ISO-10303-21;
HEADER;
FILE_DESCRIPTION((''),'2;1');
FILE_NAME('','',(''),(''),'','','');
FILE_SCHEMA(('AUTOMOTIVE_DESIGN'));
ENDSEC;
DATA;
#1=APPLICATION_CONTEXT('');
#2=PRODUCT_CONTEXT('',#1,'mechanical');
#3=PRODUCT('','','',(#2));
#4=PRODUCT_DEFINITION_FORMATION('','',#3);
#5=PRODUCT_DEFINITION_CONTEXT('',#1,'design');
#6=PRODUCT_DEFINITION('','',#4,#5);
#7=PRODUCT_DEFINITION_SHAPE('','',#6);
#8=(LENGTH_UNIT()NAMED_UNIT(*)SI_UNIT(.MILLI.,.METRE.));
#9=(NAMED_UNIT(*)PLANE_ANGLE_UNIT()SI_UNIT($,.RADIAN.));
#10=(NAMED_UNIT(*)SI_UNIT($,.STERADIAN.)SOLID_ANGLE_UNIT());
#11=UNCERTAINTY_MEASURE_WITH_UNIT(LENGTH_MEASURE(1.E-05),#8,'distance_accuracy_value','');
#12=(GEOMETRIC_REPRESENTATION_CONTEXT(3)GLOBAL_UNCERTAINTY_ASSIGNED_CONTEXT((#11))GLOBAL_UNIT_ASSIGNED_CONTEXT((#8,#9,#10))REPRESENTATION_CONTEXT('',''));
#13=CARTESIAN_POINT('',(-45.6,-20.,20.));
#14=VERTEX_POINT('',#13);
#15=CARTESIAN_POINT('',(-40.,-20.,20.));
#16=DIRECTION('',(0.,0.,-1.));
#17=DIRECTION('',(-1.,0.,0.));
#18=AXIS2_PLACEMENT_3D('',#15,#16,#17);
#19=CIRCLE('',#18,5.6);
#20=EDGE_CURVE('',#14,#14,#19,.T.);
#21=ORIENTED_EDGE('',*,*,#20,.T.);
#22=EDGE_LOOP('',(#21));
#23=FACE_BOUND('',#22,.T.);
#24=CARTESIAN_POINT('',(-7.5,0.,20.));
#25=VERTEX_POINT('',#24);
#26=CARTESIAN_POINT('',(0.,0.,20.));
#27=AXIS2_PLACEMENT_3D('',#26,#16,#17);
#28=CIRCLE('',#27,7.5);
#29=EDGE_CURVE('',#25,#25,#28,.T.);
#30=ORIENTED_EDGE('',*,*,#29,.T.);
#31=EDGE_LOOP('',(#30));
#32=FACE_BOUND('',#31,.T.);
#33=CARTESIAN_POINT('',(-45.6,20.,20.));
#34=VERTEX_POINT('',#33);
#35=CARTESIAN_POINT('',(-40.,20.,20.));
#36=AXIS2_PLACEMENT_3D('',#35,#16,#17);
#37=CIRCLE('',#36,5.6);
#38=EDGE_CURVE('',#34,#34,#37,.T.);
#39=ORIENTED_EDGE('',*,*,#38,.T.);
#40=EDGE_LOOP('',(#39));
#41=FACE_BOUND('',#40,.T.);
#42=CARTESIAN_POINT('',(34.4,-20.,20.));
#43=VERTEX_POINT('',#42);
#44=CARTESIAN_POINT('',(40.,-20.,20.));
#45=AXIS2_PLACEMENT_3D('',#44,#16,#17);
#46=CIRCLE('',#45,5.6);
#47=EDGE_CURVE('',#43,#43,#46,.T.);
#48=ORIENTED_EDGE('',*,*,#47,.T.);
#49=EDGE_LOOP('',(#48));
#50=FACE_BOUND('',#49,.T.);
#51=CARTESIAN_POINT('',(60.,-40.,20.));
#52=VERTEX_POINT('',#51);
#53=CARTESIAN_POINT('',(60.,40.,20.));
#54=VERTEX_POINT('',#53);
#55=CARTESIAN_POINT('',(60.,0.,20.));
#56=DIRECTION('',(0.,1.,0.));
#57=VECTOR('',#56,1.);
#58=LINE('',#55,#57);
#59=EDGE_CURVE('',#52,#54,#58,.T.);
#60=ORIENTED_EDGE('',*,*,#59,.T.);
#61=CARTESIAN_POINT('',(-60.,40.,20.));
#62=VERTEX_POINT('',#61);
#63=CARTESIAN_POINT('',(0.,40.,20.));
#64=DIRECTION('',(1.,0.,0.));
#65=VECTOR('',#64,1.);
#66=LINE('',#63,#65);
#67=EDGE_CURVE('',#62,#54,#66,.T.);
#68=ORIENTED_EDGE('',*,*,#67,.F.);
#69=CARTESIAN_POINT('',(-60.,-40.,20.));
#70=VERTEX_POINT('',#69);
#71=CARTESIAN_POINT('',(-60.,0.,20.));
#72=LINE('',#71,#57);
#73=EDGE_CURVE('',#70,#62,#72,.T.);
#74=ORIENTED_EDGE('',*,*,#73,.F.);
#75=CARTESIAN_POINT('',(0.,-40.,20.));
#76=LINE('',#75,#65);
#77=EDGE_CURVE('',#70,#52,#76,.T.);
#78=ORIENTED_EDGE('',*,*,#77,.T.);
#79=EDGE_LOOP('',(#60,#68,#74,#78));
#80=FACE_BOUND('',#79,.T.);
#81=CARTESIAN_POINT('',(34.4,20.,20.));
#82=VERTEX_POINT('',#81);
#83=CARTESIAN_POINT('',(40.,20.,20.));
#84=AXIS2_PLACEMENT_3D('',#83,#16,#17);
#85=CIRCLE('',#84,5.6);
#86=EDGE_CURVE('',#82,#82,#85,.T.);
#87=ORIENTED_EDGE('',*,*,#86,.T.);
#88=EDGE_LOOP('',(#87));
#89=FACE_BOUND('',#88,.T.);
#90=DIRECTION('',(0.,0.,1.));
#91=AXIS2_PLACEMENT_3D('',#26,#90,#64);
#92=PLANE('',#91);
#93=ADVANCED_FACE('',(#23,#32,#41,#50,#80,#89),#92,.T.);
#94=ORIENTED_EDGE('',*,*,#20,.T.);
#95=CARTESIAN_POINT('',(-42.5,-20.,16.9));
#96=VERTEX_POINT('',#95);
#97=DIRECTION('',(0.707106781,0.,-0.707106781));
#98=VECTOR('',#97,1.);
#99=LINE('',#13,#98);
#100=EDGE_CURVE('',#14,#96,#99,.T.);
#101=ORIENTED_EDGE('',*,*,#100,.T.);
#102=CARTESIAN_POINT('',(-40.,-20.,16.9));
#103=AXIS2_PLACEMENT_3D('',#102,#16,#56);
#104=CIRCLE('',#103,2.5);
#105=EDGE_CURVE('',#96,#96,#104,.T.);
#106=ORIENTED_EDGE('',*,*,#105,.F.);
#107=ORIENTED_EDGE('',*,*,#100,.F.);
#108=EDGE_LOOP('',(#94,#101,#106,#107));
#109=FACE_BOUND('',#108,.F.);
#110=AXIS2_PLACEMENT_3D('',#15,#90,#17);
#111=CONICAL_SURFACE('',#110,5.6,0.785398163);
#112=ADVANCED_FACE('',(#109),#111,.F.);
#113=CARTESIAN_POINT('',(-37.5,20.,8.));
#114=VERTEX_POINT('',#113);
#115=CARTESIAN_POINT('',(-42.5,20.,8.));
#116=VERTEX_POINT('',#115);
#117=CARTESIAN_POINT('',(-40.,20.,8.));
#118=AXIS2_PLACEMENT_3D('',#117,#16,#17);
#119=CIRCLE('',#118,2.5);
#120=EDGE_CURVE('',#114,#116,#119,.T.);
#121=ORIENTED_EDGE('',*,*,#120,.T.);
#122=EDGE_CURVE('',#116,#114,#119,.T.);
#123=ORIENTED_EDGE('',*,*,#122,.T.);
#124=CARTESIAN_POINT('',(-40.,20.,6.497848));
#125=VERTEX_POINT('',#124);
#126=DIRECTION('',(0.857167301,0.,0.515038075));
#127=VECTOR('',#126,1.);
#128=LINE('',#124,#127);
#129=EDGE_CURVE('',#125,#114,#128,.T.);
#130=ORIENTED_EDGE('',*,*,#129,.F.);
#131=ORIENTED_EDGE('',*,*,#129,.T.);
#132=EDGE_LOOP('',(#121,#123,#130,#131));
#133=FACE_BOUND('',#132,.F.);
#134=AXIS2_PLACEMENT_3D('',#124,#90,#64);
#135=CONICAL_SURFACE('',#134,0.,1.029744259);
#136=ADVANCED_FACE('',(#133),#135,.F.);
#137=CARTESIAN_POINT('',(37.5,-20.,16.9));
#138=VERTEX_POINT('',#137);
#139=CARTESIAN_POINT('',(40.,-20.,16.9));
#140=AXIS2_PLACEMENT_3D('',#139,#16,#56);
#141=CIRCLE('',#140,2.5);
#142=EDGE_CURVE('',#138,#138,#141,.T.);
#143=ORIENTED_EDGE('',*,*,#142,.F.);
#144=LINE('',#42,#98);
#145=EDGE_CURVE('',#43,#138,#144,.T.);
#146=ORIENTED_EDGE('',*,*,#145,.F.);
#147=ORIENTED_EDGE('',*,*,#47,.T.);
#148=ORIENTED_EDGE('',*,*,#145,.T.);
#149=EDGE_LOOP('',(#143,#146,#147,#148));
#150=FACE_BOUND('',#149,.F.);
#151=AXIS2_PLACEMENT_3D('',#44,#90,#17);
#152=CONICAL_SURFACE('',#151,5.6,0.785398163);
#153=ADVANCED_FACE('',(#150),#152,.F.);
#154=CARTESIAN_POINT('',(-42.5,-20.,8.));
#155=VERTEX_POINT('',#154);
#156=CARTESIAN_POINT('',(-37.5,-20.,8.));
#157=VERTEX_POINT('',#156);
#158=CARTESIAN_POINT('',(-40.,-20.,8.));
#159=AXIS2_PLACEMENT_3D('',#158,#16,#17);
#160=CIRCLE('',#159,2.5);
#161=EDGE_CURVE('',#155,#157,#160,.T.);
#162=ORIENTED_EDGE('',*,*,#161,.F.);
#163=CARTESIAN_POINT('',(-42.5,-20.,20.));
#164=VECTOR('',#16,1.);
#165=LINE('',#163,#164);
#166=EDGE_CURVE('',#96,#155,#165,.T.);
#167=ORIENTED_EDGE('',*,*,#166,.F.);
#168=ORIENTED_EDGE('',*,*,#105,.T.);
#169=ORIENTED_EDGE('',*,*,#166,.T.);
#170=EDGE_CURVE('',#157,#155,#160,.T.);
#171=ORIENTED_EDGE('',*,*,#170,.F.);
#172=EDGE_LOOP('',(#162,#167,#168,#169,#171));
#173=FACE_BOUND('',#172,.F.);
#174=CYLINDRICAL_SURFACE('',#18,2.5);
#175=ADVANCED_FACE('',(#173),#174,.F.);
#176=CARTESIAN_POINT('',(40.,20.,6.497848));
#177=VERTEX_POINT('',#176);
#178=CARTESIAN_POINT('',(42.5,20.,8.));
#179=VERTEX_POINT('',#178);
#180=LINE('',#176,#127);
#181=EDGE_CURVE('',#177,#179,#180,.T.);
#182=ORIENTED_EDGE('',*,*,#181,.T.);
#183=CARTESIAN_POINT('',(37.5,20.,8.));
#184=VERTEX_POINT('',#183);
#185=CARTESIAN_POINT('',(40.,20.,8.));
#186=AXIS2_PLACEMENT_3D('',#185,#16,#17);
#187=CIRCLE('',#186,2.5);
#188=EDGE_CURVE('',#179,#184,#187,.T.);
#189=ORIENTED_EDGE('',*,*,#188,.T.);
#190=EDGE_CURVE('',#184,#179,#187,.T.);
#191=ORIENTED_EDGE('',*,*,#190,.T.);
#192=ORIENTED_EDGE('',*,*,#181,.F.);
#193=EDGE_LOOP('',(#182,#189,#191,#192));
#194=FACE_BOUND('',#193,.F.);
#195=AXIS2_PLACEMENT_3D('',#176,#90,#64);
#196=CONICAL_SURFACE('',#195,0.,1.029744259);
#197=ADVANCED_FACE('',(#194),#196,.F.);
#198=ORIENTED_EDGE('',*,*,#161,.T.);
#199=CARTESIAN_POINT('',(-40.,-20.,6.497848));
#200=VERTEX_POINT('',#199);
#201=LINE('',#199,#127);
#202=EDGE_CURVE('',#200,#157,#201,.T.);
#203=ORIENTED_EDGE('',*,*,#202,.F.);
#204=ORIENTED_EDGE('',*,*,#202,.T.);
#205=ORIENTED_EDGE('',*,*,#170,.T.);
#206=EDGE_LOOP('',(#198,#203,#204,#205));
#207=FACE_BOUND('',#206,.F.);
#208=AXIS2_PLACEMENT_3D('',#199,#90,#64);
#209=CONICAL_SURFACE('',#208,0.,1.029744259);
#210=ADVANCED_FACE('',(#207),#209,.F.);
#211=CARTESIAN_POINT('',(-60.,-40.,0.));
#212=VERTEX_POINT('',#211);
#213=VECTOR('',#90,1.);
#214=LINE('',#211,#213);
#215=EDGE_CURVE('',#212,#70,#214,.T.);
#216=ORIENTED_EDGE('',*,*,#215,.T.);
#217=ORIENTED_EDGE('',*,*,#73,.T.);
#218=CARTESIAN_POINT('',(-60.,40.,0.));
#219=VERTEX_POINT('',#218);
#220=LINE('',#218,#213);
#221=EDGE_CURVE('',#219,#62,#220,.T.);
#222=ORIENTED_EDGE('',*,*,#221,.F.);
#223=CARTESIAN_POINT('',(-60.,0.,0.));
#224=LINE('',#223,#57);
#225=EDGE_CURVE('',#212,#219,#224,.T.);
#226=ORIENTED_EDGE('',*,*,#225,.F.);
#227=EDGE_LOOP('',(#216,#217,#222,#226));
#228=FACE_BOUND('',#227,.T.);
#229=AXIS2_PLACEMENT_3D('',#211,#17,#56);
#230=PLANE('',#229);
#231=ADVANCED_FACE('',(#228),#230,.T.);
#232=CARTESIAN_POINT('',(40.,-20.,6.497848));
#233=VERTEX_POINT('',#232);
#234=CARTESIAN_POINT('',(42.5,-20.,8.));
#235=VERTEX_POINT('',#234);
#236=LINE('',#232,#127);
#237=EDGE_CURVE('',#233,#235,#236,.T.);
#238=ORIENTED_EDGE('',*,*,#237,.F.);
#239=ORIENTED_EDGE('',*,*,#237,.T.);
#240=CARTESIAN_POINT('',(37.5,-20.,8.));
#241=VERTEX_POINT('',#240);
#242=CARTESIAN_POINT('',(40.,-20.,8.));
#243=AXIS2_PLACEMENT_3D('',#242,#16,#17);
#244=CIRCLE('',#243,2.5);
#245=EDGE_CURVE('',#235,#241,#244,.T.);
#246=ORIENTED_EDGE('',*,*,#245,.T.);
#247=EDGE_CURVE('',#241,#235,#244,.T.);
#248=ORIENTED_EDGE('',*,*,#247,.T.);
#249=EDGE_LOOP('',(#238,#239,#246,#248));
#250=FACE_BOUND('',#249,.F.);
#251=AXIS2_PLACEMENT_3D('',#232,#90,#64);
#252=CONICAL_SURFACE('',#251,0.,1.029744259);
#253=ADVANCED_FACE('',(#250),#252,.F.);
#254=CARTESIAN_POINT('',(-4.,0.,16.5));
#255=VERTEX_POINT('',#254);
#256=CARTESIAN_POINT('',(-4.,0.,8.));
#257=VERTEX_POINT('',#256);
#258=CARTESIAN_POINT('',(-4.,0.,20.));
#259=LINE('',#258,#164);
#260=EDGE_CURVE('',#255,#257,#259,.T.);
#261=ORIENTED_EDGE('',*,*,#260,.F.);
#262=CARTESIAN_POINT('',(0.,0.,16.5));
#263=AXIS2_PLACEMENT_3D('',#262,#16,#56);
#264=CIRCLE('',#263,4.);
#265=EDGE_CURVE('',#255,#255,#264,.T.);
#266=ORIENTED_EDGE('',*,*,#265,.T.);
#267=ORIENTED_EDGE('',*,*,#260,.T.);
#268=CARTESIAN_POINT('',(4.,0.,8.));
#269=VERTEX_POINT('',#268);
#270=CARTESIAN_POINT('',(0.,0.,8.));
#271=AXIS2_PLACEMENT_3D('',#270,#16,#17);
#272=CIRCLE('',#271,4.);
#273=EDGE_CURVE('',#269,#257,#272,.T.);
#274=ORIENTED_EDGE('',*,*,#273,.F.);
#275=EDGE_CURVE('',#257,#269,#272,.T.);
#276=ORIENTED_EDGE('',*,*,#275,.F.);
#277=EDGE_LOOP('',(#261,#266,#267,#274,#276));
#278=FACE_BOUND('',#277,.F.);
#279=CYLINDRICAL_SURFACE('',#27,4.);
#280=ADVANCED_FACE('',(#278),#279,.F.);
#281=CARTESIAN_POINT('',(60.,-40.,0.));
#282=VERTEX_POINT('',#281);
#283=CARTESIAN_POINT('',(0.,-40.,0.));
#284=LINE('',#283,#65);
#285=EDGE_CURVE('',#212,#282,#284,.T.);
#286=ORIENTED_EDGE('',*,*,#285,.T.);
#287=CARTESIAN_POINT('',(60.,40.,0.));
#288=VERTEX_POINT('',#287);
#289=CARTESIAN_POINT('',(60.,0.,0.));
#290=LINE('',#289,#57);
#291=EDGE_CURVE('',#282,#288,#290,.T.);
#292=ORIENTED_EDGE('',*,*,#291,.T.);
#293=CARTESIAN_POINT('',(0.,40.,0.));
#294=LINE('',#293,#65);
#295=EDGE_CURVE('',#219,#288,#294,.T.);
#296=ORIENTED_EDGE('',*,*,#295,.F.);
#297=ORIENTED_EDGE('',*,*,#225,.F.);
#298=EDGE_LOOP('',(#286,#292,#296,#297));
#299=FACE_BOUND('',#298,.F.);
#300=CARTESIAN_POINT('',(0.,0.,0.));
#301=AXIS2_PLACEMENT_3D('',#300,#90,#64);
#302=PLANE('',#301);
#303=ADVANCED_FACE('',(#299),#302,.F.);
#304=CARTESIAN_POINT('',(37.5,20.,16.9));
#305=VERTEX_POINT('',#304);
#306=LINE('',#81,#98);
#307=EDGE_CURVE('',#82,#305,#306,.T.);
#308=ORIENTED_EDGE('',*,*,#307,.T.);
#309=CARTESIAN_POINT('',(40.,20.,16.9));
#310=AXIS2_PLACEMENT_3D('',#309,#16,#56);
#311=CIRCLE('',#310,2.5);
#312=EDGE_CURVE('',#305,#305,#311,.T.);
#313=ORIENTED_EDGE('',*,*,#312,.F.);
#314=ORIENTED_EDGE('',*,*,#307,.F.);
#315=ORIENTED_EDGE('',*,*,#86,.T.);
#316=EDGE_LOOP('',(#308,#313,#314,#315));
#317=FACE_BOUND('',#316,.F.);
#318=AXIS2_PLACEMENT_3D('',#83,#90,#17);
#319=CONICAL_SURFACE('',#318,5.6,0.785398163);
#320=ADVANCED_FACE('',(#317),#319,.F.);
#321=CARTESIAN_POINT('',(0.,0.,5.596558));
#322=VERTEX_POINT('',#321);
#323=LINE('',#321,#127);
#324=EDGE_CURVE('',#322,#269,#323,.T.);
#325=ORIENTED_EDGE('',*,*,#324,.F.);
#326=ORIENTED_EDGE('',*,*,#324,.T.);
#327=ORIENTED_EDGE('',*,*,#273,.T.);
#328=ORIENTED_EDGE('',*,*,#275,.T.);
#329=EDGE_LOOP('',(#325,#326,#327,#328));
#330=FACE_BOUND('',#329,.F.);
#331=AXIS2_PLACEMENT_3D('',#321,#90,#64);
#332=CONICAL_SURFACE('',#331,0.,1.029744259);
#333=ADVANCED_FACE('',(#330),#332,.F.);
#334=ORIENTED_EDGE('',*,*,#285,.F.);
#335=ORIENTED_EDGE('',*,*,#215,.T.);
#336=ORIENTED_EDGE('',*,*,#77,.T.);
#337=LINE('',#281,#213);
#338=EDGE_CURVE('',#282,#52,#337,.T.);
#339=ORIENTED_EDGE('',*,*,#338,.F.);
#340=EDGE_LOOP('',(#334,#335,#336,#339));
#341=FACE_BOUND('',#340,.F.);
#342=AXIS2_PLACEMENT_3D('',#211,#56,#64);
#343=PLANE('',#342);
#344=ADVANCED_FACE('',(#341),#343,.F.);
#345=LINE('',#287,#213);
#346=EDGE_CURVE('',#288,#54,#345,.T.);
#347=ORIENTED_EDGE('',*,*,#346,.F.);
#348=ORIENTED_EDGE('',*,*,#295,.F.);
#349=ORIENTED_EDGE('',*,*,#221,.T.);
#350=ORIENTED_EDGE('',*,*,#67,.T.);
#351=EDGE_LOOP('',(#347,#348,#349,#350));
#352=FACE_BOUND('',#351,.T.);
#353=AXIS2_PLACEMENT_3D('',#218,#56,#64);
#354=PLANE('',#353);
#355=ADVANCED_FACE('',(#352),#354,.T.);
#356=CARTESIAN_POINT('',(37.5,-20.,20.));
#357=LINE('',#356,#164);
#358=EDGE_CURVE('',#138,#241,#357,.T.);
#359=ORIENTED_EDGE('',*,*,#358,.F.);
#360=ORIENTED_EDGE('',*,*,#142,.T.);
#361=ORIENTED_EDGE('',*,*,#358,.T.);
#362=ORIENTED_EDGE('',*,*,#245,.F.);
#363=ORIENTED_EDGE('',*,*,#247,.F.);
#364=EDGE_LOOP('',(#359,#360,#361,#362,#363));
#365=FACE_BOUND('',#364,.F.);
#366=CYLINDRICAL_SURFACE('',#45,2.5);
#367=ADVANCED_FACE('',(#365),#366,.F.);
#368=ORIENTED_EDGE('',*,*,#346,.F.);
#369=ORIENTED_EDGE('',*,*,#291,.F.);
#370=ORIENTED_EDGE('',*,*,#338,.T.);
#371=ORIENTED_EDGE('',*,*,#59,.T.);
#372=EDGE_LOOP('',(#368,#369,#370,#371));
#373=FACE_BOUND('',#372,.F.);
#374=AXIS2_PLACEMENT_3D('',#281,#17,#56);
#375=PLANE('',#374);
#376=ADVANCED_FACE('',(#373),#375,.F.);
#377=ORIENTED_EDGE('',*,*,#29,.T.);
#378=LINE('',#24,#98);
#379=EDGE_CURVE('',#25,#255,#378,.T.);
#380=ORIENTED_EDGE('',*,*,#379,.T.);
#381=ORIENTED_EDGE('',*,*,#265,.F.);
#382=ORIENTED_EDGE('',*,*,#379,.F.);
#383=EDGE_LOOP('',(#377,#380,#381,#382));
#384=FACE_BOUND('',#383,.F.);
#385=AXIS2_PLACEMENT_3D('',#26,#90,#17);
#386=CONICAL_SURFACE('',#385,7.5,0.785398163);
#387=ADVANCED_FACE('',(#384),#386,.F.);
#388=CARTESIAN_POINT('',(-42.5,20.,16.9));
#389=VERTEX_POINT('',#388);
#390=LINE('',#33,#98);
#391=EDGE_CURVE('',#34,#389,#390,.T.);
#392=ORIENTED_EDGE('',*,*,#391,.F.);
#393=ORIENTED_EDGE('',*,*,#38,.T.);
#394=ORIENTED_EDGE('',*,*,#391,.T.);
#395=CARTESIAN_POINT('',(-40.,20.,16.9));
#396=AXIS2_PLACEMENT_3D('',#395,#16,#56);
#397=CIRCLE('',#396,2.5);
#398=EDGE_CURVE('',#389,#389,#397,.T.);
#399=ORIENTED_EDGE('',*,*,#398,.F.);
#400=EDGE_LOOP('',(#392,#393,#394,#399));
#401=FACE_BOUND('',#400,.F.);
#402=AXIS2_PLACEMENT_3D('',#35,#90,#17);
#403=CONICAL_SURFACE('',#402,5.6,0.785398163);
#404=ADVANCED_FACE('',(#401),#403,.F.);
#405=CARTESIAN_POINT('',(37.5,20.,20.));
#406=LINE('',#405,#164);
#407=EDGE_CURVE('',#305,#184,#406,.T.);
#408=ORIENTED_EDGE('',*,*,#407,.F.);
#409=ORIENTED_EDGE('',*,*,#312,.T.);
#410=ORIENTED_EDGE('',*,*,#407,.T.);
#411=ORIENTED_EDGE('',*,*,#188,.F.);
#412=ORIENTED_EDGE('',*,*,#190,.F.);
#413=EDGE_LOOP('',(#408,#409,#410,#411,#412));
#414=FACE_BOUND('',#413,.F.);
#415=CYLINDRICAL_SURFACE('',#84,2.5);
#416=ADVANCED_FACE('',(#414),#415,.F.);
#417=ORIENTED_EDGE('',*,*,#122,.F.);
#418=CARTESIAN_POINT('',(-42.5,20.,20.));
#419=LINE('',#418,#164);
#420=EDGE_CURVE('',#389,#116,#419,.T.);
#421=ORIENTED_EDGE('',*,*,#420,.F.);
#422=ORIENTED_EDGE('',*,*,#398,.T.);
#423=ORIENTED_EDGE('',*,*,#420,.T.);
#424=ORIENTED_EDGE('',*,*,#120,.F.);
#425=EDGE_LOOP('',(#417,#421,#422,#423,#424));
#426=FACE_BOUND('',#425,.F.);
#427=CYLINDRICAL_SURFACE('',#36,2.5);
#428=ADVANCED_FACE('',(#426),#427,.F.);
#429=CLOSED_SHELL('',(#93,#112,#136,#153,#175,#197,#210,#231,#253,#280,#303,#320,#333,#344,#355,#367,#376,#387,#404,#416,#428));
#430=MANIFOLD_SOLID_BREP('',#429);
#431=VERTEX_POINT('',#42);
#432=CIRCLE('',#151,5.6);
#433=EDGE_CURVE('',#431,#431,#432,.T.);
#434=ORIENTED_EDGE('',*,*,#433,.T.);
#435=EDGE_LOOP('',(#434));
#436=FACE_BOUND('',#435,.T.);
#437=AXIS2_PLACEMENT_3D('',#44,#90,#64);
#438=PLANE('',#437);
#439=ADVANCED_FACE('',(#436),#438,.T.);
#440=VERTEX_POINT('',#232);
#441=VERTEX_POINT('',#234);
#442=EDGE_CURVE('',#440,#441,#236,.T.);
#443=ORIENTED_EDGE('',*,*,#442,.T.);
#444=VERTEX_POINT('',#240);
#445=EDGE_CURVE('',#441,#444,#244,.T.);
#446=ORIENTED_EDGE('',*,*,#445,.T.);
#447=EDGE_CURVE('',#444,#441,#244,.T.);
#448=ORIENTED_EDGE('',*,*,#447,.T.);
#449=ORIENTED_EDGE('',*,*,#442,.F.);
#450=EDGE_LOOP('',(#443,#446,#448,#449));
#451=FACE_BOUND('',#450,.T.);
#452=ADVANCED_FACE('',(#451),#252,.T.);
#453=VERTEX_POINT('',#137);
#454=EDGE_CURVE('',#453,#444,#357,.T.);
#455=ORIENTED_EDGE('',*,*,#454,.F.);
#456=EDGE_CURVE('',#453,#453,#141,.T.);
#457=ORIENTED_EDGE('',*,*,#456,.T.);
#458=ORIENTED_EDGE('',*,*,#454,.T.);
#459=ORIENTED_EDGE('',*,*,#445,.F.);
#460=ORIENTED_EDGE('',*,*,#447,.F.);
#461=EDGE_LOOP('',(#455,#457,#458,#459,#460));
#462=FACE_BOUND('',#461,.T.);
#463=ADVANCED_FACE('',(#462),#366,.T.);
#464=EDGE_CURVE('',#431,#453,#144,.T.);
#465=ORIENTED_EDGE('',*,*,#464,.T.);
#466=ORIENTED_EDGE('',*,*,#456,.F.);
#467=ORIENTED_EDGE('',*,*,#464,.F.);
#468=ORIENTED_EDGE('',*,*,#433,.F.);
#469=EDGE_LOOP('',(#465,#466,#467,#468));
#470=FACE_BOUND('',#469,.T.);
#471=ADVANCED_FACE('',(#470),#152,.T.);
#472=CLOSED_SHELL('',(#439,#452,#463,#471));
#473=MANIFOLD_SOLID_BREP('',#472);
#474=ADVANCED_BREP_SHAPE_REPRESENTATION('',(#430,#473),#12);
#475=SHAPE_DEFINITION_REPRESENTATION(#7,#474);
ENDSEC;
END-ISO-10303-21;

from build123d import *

# Parameters (mm, degrees)
F0_W           = 120
F0_H           = 80
F1_DEPTH       = 20
F3_D           = 5
F3_DEPTH       = 12
F3_CSINK_D     = 11.2
F3_CSINK_ANGLE = 90
F3_TIP         = 1.5021515476
F4_R           = 5.6
F5_DEPTH       = 20
F8_D           = 8
F8_DEPTH       = 12
F8_CSINK_D     = 15
F8_CSINK_ANGLE = 90
F8_TIP         = 2.4034424761


with BuildPart() as f1:
    # F0 (on Top) → F1 (new body)
    with BuildSketch(Plane.XY):
        Rectangle(F0_W, F0_H)
    extrude(amount=F1_DEPTH)

    # F3
    with Locations(Plane.XY.offset(20)):
        with Locations((-40, -20), (40, -20), (40, 20), (-40, 20)):
            CounterSinkHole(F3_D / 2, F3_CSINK_D / 2, depth=F3_DEPTH, counter_sink_angle=F3_CSINK_ANGLE)
            with Locations((0, 0, -(F3_DEPTH + F3_TIP / 2))):  # 118° drill point
                Cone(0, F3_D / 2, F3_TIP, mode=Mode.SUBTRACT)


with BuildPart() as f5:
    # F4 (on face) → F5 (new body)
    with BuildSketch(Plane.XY.offset(20)):
        with Locations((40, -20)):
            Circle(F4_R)
    extrude(amount=-F5_DEPTH)

    # F6: cut F1
    add(f1.part, mode=Mode.SUBTRACT)


with BuildPart() as f1_1:
    add(f1.part)

    # F8
    with Locations(Plane.XY.offset(20)):
        with Locations((0, 0)):
            CounterSinkHole(F8_D / 2, F8_CSINK_D / 2, depth=F8_DEPTH, counter_sink_angle=F8_CSINK_ANGLE)
            with Locations((0, 0, -(F8_DEPTH + F8_TIP / 2))):  # 118° drill point
                Cone(0, F8_D / 2, F8_TIP, mode=Mode.SUBTRACT)


solid = Compound([f5.part, f1_1.part])
